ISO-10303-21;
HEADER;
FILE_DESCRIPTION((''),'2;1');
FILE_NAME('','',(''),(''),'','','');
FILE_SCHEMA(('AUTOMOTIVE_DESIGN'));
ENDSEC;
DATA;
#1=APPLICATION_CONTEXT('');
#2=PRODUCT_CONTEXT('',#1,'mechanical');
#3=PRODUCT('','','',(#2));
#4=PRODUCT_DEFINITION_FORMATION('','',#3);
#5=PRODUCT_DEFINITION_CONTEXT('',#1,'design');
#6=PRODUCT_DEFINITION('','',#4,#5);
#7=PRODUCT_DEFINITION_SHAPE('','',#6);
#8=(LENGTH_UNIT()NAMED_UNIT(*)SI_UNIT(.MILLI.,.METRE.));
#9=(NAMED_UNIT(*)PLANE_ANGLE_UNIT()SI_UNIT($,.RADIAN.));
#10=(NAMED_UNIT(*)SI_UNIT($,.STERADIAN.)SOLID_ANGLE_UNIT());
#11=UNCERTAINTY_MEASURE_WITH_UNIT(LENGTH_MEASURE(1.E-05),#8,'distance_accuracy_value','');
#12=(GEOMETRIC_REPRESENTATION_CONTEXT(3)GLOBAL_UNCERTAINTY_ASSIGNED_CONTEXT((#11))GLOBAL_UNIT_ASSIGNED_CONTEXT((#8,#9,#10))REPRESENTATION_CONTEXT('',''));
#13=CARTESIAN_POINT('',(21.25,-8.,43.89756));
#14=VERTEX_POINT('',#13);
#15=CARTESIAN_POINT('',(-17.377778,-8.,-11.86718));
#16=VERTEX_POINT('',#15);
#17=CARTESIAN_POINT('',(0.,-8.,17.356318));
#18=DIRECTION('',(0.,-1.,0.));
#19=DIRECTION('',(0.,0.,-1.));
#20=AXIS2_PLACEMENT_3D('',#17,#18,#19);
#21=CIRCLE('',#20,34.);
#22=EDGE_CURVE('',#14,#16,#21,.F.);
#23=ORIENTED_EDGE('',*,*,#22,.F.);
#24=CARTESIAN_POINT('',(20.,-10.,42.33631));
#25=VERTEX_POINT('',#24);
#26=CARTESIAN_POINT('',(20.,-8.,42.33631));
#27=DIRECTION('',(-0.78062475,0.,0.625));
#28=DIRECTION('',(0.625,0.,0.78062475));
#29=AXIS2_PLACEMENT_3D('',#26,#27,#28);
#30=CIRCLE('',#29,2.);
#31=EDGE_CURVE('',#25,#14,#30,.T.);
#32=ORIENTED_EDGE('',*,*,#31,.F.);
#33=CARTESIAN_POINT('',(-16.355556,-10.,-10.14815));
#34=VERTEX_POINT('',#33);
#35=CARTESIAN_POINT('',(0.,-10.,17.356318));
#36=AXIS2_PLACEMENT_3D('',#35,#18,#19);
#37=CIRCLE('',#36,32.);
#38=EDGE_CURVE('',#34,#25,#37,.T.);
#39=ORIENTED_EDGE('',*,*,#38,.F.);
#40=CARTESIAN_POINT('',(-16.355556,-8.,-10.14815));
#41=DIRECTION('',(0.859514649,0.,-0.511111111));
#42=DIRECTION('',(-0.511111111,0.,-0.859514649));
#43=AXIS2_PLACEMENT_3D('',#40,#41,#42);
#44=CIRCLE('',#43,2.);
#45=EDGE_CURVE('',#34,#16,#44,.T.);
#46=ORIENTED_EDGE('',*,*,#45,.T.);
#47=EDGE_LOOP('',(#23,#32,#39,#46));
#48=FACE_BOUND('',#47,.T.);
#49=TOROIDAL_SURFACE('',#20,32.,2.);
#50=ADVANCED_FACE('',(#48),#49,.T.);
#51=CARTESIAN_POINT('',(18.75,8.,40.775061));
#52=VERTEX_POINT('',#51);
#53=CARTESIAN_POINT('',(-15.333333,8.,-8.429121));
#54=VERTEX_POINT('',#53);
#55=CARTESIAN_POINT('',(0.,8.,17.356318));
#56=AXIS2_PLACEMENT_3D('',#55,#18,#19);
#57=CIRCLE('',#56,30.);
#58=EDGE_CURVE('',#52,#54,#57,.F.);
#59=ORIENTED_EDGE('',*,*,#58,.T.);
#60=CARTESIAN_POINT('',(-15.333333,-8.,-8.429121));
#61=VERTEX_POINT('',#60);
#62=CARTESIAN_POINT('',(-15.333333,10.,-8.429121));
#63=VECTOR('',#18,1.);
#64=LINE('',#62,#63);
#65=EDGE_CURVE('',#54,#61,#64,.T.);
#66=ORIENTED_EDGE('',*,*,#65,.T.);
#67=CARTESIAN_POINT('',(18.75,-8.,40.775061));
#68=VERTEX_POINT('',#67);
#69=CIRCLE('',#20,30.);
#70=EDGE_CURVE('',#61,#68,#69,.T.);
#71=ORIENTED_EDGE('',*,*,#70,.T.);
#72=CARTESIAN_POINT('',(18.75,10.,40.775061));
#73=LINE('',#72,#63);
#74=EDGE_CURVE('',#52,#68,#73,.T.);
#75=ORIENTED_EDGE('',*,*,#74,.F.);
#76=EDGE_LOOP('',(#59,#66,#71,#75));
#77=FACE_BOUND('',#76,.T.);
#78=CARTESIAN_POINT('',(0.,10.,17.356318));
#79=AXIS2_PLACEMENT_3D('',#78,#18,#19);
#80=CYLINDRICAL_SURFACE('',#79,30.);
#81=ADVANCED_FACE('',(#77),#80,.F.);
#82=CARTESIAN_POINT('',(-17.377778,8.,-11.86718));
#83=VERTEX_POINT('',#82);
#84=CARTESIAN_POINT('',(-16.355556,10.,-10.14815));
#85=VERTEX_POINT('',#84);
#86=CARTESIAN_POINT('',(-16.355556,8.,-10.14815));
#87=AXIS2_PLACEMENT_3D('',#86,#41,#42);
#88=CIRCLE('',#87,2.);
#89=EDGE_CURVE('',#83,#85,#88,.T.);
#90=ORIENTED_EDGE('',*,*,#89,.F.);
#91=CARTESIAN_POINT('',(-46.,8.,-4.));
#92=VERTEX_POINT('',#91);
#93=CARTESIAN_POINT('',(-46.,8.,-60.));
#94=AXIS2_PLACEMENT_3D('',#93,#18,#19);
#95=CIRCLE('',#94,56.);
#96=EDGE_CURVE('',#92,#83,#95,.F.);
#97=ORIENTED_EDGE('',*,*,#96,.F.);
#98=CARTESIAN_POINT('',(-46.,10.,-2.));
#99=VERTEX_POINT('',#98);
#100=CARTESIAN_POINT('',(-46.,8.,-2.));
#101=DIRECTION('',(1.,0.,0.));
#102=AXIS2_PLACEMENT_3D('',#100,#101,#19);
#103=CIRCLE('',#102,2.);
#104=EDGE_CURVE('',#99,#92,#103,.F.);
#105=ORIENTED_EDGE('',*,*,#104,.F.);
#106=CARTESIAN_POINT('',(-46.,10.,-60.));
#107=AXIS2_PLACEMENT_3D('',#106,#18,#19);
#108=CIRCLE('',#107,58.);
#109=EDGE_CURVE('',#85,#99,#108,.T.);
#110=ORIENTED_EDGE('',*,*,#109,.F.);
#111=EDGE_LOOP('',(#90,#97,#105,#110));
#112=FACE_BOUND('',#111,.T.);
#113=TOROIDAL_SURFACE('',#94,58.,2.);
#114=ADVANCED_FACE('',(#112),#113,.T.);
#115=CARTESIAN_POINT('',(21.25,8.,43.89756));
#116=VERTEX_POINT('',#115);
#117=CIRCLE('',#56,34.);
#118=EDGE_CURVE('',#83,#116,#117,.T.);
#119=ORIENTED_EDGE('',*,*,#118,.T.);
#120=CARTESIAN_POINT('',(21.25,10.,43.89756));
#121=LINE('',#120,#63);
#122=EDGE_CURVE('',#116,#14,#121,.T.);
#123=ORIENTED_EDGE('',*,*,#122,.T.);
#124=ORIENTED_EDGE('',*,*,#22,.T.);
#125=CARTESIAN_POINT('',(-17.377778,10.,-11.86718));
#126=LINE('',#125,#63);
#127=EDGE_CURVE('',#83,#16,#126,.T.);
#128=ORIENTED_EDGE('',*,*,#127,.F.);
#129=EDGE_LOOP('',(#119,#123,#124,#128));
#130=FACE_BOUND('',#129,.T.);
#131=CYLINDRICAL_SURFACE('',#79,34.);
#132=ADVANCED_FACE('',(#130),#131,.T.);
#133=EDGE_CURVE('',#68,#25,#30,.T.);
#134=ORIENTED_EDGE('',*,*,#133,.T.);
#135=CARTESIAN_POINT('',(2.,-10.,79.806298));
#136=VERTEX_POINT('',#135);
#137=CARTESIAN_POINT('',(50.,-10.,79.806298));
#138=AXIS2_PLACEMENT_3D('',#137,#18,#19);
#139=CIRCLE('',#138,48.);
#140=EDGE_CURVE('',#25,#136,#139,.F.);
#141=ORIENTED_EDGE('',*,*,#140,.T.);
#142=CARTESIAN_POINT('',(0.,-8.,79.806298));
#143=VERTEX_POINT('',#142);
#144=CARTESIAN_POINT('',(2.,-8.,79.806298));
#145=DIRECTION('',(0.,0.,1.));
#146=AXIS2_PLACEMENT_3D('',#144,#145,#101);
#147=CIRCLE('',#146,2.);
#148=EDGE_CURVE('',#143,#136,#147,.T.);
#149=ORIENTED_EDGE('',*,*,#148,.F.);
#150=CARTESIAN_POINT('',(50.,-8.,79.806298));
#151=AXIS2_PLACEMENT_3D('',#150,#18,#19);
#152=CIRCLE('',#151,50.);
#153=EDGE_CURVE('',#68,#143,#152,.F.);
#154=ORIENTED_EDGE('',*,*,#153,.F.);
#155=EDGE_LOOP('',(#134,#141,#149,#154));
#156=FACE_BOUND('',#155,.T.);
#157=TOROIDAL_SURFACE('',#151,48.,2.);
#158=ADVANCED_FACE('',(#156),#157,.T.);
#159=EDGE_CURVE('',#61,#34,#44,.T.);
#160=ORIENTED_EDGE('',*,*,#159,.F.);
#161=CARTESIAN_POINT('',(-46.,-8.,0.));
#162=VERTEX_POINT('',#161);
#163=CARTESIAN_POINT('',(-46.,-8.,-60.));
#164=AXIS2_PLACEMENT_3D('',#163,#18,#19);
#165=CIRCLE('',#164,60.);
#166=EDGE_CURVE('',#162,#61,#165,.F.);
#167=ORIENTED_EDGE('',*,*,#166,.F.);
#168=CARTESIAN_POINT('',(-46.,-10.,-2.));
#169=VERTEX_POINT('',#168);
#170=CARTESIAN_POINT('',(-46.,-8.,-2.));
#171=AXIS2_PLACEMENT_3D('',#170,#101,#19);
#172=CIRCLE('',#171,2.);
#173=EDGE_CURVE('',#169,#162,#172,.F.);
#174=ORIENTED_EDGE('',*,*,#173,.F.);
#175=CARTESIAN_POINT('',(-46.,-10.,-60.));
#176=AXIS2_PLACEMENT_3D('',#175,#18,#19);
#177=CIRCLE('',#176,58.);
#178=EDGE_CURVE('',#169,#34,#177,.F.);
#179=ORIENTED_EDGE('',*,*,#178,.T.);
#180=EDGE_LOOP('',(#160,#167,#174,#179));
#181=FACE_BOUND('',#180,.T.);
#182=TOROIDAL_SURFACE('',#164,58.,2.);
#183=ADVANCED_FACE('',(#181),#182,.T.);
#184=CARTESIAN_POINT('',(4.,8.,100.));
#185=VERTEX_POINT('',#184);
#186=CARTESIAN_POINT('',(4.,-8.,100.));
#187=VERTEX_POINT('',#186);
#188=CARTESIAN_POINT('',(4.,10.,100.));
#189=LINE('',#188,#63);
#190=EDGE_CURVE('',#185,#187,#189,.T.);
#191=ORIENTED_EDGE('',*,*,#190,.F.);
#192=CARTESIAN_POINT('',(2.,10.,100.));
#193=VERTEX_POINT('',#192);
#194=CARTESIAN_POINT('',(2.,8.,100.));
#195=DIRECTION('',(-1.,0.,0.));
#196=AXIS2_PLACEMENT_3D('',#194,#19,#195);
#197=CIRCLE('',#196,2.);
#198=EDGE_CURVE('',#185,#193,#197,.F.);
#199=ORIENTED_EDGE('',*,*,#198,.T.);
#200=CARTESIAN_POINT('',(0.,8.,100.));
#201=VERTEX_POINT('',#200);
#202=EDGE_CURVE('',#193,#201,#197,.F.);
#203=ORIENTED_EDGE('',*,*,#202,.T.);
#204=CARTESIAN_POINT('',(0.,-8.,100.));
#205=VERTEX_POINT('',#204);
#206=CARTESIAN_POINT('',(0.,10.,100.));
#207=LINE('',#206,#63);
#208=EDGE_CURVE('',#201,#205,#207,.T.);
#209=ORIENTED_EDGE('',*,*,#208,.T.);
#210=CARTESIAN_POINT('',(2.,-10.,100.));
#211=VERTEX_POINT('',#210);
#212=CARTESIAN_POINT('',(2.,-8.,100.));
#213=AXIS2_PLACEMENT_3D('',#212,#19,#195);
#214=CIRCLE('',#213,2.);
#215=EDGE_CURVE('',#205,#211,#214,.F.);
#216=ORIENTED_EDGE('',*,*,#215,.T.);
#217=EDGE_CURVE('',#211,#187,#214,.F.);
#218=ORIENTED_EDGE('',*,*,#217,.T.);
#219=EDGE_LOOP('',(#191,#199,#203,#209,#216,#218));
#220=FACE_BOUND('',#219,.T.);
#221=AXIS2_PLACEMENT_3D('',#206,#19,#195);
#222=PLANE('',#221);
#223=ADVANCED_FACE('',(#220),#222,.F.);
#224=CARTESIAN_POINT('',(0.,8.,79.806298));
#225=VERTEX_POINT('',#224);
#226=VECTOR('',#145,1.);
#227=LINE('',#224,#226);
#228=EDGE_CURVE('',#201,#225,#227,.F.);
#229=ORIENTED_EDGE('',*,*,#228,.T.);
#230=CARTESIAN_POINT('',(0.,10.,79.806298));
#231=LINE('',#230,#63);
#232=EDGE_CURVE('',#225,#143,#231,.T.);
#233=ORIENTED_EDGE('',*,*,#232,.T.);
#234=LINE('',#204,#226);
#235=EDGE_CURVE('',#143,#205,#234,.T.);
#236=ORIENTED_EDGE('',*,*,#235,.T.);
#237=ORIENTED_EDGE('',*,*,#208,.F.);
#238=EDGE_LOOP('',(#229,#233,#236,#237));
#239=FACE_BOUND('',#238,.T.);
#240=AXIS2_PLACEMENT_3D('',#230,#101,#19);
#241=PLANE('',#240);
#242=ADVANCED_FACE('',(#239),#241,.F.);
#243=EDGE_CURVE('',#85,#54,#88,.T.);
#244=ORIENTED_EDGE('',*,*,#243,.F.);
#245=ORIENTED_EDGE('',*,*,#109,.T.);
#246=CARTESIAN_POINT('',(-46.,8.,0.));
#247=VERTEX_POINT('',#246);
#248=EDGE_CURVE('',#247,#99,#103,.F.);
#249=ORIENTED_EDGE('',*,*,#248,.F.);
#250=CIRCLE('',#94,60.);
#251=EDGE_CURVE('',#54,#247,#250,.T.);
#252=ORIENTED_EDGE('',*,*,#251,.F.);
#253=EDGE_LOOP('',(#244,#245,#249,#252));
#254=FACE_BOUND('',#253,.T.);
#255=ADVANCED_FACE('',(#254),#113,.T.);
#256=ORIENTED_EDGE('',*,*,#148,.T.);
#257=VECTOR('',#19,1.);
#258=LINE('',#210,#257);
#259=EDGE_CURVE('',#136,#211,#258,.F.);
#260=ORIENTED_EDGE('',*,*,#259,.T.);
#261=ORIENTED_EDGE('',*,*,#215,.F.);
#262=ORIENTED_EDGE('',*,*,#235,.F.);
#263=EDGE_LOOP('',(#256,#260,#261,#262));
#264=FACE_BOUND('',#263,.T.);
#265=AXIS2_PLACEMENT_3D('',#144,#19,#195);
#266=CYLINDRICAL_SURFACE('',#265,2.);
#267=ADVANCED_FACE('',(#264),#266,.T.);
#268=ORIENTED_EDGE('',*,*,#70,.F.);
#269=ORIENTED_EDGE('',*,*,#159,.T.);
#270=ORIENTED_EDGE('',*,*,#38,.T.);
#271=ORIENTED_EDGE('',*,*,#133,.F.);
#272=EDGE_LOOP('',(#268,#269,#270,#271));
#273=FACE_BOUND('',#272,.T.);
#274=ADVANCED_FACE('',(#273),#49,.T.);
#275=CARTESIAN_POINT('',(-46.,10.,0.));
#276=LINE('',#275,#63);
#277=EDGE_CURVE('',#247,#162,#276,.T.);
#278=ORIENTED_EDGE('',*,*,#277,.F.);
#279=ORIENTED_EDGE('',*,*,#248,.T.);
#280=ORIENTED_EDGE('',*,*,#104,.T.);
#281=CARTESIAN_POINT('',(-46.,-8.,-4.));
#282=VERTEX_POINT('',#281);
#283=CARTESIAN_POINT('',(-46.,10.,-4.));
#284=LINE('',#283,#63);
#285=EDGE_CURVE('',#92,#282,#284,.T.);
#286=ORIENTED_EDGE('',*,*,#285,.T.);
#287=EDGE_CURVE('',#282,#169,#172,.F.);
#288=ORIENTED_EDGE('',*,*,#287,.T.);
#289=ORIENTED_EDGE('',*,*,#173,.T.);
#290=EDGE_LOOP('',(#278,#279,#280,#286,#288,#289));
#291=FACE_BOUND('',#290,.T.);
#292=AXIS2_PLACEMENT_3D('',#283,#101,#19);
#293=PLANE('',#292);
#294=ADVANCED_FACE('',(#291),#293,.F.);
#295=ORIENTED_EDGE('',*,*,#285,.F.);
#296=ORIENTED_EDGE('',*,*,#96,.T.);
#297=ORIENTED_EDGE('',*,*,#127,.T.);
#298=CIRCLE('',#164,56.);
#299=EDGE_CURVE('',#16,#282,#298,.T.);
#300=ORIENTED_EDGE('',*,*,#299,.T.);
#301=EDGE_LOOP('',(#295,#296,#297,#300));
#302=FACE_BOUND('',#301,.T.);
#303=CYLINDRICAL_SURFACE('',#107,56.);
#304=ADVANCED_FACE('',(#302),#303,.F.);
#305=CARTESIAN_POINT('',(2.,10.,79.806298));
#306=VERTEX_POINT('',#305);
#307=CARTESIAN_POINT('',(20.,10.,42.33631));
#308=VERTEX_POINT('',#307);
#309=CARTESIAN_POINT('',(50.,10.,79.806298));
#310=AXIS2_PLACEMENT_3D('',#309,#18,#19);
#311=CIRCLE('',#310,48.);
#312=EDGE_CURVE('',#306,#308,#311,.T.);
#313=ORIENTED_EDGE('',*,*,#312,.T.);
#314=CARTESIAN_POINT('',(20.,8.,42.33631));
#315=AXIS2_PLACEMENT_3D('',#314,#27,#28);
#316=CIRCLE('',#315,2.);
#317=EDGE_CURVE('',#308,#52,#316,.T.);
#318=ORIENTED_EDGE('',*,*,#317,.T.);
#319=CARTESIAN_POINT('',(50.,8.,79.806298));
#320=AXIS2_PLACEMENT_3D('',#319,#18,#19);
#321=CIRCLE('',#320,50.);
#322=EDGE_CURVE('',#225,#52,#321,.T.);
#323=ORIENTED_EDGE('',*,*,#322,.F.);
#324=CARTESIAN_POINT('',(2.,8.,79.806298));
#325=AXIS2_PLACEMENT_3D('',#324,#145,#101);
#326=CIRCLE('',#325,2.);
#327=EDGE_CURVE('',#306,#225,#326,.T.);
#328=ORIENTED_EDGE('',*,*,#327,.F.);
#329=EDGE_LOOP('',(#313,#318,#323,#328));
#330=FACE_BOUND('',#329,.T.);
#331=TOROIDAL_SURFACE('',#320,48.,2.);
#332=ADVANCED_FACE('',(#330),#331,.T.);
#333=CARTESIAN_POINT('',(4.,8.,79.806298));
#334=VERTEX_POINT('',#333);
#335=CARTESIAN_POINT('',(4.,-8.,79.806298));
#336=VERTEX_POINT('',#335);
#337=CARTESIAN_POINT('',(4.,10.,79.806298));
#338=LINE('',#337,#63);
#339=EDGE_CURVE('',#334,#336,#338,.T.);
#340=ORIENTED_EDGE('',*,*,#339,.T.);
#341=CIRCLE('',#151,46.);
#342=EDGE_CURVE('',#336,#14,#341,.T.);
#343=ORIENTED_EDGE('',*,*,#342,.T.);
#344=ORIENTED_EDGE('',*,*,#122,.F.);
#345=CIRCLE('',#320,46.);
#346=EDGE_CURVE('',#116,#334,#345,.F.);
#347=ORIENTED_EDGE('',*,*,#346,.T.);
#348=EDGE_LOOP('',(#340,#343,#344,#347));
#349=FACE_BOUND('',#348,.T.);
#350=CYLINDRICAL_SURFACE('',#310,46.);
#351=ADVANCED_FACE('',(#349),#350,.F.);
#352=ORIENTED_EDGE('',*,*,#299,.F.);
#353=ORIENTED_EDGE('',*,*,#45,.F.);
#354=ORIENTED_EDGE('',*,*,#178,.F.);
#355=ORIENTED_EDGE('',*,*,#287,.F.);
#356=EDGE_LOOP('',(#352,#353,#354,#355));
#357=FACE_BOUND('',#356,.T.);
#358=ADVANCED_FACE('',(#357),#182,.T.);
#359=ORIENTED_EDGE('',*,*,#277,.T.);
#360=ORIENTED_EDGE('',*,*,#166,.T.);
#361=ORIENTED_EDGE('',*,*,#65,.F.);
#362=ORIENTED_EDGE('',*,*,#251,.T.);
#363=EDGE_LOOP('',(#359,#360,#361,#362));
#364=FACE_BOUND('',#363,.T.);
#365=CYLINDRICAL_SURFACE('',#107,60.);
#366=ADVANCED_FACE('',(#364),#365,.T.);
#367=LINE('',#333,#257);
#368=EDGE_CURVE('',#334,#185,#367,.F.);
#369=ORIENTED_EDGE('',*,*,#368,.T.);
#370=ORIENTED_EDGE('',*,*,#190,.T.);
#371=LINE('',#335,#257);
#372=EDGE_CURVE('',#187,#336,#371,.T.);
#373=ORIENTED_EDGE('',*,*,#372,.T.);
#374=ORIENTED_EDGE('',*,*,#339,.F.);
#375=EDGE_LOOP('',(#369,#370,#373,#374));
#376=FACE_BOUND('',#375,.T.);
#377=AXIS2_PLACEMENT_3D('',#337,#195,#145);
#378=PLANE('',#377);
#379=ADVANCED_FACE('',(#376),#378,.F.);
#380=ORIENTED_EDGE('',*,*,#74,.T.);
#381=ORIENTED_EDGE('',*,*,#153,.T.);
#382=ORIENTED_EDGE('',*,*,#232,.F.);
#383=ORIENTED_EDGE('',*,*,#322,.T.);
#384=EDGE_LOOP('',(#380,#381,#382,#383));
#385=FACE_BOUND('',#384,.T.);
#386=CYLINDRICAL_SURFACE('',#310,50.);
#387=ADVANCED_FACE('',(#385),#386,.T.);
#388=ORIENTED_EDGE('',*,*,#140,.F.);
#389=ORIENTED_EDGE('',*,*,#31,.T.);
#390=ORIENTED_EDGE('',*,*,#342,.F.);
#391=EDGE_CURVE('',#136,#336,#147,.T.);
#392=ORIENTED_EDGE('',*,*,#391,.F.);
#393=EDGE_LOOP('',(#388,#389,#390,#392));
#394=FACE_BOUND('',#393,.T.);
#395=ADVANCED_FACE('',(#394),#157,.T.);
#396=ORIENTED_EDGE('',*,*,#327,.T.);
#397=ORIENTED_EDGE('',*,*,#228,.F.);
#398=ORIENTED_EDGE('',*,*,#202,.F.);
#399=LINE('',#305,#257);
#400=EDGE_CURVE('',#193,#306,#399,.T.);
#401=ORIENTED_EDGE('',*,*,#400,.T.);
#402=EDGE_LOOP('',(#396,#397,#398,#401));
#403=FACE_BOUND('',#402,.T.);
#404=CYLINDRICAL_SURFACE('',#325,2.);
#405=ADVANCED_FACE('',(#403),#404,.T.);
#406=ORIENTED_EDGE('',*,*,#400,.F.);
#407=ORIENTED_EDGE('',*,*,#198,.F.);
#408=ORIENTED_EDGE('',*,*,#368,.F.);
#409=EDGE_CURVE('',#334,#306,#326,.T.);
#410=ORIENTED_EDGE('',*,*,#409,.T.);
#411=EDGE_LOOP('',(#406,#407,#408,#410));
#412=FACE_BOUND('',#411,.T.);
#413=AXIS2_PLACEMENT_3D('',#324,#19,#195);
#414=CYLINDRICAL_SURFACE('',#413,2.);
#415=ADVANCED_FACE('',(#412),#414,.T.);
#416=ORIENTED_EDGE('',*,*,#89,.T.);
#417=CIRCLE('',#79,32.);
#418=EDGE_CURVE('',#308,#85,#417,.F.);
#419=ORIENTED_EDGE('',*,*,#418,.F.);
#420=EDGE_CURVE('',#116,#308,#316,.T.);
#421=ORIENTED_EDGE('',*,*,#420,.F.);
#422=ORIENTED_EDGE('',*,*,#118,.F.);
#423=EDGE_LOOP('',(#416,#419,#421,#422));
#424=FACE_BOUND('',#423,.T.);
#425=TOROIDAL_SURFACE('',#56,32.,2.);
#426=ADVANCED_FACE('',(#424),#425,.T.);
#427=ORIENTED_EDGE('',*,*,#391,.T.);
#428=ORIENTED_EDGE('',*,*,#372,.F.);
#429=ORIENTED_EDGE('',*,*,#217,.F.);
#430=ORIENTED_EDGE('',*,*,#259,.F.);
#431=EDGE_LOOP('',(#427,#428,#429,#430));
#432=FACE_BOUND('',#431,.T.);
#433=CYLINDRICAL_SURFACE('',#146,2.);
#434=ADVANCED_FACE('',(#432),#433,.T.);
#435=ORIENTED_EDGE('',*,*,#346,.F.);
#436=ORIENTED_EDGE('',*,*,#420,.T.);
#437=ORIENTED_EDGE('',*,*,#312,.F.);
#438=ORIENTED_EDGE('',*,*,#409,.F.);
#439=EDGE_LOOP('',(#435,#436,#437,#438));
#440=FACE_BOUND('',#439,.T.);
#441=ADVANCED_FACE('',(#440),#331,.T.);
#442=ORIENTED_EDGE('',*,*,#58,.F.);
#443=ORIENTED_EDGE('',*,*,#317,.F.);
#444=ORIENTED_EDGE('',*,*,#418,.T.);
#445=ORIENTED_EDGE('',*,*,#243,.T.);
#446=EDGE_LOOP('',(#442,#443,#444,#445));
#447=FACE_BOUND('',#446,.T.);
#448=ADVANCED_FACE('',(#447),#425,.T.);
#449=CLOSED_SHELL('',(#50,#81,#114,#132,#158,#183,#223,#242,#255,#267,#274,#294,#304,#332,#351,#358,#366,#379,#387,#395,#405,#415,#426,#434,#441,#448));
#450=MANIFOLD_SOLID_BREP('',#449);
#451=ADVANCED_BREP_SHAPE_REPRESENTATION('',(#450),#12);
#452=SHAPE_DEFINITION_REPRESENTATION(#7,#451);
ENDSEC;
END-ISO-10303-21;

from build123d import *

# Parameters (mm, degrees)
BOSS_EXTRUDE1_DEPTH = 10
FILLET1_R           = 2


with BuildPart() as part:
    # Sketch1 → Boss-Extrude1 (new, symmetric)
    with BuildSketch(Plane(origin=(0, 0, 0), x_dir=(1, 0, 0), z_dir=(0, 1, 0))):
        with BuildLine():
            Line((4, -79.806298407), (4, -100))
            Line((4, -100), (0, -100))
            Line((0, -100), (0, -79.806298407))
            ThreePointArc((0, -79.806298407), (4.930609057, -58.155663313), (18.75, -40.775060917))
            ThreePointArc((18.75, -40.775060917), (24.661331748, -0.273616166), (-15.333333333, 8.429121051))
            ThreePointArc((-15.333333333, 8.429121051), (-30.097999134, 2.145645207), (-46, 0))
            Line((-46, 0), (-46, 4))
            ThreePointArc((-46, 4), (-31.158132525, 6.002602194), (-17.377777778, 11.867179648))
            ThreePointArc((-17.377777778, 11.867179648), (27.949509314, 2.004077469), (21.25, -43.897559916))
            ThreePointArc((21.25, -43.897559916), (8.536160332, -59.88771412), (4, -79.806298407))
        make_face()
    extrude(amount=BOSS_EXTRUDE1_DEPTH, both=True)

    # Fillet1
    fillet1_edges = [part.edges().sort_by_distance(p)[0] for p in [
        (0, -10, 89.903149204),
        (4.930609057, -10, 58.155663313),
        (24.661331748, -10, 0.273616166),
        (4, -10, 89.903149204),
        (8.536160332, -10, 59.88771412),
        (27.949509314, -10, -2.004077469),
        (0, 10, 89.903149204),
        (4.930609057, 10, 58.155663313),
        (24.661331748, 10, 0.273616166),
        (4, 10, 89.903149204),
        (8.536160332, 10, 59.88771412),
        (27.949509314, 10, -2.004077469),
        (-30.097999134, -10, -2.145645207),
        (-31.158132525, -10, -6.002602194),
        (-30.097999134, 10, -2.145645207),
        (-31.158132525, 10, -6.002602194),
    ]]
    fillet(fillet1_edges, radius=FILLET1_R - 0.0001)  # a hair under: the kernel refuses the full size


solid = part.part
